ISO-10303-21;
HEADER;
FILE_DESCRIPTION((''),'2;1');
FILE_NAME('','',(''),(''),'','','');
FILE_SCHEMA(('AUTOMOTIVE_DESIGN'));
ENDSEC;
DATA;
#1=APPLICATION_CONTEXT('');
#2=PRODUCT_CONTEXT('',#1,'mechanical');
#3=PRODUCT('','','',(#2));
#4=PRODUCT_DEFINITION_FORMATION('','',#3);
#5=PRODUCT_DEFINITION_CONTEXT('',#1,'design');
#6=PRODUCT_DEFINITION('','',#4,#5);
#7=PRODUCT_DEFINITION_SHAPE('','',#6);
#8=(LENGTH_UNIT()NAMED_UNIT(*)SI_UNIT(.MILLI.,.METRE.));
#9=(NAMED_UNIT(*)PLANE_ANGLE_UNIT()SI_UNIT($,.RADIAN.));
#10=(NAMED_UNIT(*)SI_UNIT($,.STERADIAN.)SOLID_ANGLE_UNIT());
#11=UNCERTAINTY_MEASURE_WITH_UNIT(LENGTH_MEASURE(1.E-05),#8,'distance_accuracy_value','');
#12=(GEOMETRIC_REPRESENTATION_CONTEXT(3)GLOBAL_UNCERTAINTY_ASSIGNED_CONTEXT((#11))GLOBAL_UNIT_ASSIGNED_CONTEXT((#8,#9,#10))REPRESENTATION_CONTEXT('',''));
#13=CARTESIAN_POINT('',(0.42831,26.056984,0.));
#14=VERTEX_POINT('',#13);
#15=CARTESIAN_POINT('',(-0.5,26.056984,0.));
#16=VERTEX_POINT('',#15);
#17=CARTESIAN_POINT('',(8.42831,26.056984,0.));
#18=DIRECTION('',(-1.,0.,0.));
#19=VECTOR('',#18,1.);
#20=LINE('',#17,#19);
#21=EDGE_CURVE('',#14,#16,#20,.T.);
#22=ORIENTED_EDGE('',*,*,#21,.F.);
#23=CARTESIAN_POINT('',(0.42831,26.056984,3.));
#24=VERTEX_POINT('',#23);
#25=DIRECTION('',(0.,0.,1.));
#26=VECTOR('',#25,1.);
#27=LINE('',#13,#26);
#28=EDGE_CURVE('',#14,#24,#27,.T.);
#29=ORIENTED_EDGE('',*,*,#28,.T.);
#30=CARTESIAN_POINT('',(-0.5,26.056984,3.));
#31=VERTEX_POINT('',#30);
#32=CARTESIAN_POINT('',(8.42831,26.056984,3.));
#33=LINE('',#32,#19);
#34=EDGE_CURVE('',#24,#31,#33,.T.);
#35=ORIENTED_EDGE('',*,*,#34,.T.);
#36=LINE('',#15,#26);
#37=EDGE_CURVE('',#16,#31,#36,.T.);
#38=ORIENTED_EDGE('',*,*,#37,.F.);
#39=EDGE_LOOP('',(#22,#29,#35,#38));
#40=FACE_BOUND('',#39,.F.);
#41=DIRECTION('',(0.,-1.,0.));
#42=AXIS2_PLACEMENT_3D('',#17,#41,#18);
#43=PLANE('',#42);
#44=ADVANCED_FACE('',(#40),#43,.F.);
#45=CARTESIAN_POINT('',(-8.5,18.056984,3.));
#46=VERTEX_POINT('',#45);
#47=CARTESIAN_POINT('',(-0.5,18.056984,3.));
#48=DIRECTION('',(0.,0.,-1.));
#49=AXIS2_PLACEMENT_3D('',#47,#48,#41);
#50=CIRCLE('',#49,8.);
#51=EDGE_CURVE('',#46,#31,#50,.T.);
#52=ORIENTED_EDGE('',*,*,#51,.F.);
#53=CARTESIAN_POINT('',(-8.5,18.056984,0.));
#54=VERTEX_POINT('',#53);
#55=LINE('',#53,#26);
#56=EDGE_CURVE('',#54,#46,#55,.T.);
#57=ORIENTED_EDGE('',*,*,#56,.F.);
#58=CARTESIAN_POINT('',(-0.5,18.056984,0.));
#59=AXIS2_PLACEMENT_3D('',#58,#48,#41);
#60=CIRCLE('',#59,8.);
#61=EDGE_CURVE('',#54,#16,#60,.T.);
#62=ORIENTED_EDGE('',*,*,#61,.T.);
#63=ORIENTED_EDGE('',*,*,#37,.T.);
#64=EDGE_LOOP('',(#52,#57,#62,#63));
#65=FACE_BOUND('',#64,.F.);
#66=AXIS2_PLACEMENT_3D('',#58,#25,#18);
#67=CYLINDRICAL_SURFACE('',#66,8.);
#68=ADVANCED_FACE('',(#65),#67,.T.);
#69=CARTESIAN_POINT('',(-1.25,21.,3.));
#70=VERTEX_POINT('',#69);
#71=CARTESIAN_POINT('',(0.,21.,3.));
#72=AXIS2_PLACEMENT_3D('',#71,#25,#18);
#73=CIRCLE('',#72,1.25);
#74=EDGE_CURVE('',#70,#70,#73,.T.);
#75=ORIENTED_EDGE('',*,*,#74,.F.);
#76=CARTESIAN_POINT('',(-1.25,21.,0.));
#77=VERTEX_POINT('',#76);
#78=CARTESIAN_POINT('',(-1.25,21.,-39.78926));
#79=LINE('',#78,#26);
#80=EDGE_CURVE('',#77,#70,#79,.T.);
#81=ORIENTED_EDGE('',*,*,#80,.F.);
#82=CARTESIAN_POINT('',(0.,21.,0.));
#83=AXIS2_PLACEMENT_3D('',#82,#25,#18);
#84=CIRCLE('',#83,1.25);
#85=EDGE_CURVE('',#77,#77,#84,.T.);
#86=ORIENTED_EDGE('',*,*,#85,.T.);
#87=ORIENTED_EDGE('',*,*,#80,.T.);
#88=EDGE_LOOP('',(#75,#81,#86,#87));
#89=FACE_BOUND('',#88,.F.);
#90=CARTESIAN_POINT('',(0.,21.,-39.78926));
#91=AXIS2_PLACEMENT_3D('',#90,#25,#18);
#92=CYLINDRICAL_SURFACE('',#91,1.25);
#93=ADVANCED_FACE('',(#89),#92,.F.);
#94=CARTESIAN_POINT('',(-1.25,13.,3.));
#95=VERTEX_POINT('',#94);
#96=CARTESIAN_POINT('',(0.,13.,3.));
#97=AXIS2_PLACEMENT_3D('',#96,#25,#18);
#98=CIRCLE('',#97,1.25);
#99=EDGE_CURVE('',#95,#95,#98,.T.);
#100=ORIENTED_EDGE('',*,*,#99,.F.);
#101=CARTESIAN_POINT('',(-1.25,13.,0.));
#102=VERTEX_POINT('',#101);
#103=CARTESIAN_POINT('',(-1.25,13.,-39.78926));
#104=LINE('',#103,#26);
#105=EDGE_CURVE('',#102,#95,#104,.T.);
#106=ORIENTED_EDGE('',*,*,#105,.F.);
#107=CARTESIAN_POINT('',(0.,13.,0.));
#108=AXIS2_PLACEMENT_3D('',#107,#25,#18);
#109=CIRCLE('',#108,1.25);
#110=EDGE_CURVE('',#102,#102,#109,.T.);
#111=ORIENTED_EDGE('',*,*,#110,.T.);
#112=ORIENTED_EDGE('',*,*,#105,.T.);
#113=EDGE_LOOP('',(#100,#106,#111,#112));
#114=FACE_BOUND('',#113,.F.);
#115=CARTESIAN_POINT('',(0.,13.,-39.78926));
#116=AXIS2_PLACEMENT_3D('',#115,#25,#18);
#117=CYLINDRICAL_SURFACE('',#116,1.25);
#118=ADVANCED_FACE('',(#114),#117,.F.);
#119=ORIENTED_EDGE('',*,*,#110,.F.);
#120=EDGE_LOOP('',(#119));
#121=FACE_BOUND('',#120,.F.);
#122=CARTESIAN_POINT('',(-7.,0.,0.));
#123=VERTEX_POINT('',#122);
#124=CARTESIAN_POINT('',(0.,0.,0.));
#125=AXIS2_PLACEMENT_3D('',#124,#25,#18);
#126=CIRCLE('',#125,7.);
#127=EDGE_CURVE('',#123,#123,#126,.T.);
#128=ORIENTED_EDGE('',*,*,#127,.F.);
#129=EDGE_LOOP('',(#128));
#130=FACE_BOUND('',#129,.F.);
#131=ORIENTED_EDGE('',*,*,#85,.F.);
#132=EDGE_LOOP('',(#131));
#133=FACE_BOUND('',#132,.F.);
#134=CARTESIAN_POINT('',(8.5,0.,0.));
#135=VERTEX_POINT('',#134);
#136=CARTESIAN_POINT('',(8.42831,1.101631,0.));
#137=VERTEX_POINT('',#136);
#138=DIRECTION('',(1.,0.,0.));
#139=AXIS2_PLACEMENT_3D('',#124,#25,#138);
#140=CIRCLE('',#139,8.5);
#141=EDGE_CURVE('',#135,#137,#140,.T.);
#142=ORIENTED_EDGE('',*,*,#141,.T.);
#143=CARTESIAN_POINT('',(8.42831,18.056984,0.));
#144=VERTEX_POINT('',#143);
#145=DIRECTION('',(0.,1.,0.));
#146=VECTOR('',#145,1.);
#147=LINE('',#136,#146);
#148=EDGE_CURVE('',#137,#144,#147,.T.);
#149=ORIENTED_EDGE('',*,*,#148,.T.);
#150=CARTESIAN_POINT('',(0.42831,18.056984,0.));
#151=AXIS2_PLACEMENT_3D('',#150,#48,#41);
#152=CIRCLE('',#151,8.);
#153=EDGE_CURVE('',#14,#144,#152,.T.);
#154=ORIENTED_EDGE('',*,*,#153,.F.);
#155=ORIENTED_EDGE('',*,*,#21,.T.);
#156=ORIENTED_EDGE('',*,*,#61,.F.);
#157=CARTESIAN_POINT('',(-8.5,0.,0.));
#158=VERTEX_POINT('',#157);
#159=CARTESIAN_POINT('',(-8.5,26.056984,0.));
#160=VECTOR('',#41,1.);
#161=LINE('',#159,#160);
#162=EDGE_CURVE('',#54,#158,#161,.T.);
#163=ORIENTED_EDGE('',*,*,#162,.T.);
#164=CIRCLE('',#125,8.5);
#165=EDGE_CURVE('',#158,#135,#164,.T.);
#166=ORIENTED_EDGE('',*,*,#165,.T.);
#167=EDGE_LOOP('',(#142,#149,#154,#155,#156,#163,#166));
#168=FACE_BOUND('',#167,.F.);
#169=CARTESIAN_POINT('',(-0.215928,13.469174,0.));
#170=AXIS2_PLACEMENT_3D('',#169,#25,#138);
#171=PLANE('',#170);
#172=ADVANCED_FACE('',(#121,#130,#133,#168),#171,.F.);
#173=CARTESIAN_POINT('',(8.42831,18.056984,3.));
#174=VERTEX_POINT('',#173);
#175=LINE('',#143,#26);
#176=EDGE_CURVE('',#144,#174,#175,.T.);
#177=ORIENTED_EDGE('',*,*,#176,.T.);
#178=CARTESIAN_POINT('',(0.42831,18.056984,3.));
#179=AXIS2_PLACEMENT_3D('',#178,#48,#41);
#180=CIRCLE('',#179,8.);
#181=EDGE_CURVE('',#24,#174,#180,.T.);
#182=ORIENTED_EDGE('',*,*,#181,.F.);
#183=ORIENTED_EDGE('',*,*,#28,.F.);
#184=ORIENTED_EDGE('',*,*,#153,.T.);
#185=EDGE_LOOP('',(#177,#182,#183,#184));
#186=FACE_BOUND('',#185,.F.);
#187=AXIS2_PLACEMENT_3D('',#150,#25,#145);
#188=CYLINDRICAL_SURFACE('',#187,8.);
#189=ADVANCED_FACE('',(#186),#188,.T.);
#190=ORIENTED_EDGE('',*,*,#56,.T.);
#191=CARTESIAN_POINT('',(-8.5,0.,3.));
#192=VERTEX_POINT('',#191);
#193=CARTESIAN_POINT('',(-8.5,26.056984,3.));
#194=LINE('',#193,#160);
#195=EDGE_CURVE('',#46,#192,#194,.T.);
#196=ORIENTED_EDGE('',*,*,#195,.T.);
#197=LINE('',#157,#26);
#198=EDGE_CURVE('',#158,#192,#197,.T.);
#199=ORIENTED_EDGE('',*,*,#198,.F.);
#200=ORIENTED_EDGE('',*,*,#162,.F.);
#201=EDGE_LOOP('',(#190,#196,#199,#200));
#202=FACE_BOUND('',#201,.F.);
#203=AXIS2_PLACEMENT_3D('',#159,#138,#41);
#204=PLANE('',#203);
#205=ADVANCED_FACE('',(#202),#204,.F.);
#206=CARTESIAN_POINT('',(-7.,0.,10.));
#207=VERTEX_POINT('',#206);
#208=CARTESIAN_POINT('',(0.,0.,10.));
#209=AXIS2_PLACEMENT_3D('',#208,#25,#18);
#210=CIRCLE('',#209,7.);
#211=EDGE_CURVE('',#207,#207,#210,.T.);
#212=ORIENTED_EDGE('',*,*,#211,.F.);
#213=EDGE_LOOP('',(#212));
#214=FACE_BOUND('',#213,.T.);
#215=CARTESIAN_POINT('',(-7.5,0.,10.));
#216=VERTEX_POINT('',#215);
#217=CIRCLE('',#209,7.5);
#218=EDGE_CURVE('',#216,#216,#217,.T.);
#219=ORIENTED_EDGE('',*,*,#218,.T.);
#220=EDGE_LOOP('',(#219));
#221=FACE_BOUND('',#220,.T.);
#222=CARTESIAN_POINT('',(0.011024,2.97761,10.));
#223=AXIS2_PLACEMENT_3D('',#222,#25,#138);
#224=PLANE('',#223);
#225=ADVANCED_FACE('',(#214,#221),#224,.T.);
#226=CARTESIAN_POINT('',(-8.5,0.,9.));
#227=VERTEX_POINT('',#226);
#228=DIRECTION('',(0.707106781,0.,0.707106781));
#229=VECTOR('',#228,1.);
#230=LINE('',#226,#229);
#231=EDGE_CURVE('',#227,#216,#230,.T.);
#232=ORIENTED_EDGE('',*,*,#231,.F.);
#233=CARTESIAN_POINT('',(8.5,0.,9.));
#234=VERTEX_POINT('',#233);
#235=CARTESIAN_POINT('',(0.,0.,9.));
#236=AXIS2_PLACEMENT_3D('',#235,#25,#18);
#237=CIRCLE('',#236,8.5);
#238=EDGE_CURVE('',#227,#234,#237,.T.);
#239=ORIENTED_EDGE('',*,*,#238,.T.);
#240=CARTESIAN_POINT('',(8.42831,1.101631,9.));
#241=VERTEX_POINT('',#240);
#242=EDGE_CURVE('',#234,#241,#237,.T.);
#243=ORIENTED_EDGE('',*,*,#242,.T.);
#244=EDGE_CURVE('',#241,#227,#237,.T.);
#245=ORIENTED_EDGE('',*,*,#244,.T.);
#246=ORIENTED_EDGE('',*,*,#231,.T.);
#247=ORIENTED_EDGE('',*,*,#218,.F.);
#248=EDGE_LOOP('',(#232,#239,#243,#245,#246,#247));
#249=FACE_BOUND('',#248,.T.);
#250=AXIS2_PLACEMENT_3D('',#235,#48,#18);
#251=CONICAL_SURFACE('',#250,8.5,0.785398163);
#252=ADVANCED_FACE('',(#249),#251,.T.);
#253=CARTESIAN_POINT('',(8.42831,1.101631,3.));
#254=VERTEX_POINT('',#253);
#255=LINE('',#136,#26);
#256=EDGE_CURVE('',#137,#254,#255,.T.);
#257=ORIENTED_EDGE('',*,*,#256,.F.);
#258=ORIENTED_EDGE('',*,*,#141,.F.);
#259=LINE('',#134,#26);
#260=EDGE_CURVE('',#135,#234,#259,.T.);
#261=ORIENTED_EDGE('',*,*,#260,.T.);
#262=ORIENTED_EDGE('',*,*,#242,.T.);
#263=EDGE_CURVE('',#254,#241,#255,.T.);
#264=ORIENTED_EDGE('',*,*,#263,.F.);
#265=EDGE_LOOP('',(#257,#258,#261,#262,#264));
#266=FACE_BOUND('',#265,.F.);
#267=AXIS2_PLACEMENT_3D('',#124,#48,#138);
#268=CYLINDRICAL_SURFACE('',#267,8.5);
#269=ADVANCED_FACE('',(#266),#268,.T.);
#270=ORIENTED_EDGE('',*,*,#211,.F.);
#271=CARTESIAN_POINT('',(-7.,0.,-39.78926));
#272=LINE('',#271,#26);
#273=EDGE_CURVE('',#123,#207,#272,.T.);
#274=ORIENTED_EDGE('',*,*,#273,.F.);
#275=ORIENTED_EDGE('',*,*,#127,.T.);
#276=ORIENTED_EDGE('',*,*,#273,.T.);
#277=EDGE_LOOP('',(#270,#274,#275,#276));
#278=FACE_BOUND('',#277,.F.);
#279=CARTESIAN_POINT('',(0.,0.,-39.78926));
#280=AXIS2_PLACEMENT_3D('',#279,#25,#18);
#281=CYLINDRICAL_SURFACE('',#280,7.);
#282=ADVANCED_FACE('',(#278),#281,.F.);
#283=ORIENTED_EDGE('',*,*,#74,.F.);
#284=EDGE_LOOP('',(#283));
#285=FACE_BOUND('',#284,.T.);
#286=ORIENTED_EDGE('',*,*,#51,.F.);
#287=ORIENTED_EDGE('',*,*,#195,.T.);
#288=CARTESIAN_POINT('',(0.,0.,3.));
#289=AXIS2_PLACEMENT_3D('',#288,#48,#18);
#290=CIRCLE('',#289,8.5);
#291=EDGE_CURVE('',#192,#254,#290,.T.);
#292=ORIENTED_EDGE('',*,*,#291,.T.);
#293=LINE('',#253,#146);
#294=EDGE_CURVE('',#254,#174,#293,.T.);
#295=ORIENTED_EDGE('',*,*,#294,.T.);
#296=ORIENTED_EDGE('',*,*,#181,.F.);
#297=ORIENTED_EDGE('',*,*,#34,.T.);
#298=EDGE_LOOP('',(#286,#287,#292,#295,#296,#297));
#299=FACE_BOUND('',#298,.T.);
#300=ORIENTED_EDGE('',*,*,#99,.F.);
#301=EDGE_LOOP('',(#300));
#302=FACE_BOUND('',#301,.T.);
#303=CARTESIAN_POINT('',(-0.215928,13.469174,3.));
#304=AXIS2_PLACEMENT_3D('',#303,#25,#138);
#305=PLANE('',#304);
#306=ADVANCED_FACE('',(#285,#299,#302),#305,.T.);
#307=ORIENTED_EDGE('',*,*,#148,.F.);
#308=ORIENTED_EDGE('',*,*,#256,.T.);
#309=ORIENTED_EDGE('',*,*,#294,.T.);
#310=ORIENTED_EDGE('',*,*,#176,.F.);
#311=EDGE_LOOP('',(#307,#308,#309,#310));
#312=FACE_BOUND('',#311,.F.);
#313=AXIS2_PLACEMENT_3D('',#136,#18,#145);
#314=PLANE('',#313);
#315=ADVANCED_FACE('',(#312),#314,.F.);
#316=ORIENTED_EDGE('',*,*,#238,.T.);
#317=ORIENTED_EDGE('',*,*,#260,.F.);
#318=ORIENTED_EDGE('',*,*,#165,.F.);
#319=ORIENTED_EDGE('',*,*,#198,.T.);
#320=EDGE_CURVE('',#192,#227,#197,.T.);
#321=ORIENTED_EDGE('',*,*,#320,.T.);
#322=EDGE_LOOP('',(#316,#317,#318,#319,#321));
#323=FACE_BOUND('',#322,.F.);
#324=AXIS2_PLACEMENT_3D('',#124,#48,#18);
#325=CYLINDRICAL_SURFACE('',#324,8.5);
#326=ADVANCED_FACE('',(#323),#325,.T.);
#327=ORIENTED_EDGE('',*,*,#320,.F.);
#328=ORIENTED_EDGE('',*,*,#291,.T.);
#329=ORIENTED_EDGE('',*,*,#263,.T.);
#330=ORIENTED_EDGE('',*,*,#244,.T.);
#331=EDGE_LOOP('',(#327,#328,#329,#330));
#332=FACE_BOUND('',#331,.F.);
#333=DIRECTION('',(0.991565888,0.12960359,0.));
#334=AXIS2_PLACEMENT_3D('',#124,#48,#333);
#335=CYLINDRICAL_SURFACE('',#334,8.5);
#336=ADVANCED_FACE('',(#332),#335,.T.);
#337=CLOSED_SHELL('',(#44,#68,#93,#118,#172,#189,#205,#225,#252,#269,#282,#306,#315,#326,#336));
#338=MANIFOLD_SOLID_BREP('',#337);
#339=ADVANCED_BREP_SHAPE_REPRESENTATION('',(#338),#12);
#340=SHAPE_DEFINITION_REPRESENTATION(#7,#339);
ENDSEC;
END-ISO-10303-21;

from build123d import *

# Parameters (mm, degrees)
F1_DEPTH = 10
F2_DEPTH = 3
F3_R     = 8
F4_D     = 14
F6_D     = 2.5


# Not quite as in the source:
# - a fillet or chamfer that OpenCascade refuses, or shapes differently, is made with other operations: its cross-section is extruded or revolved along the edge and cut away or added


with BuildPart() as f1:
    # F0 (on Top) → F1 (new body)
    with BuildSketch(Plane.XY):
        with BuildLine():
            ThreePointArc((8.4283100441, 1.101630519), (-0.5519803552, 8.482058576), (-8.5, 0))
            Line((-8.5, 0), (8.4283100441, 0))
            Line((8.4283100441, 0), (8.4283100441, 1.101630519))
        make_face()
        with BuildLine():
            Line((8.4283100441, 0), (-8.5, 0))
            ThreePointArc((-8.5, 0), (0, -8.5), (8.5, 0))
            ThreePointArc((8.5, 0), (8.482058576, 0.5519803552), (8.4283100441, 1.101630519))
            Line((8.4283100441, 1.101630519), (8.4283100441, 0))
        make_face()
    extrude(amount=F1_DEPTH)

    # F0 (on Top) → F2 (join)
    with BuildSketch(Plane.XY):
        with BuildLine():
            Line((-8.5, 26.0569844395), (-8.5, 0))
            ThreePointArc((-8.5, 0), (-0.5519803552, 8.482058576), (8.4283100441, 1.101630519))
            Line((8.4283100441, 1.101630519), (8.4283100441, 26.0569844395))
            Line((8.4283100441, 26.0569844395), (-8.5, 26.0569844395))
        make_face()
    extrude(amount=F2_DEPTH)

    # F3
    f3_edges = [f1.edges().sort_by_distance(p)[0] for p in [
        (-8.5, 26.056984, 1.5),
        (8.42831, 26.056984, 1.5),
    ]]
    fillet(f3_edges, radius=F3_R)

    # F4 (through all)
    with Locations(Plane(origin=(0, 0, 0), x_dir=(1, 0, 0), z_dir=(0, 0, -1))):
        with Locations((0, 0)):
            Hole(F4_D / 2)

    # F5: chamfer of 1 on 1 edges, made by hand

    # F5_s1 → F5_t2 (revolve, cut)
    with BuildSketch(Plane.XZ):
        Polygon((-8.5, 9), (-7.5, 10), (-8.5, 10), align=None)
    revolve(axis=Axis((0, 0, 10), (0, 0, 1)), mode=Mode.SUBTRACT)

    # F6 (through all)
    with Locations(Plane(origin=(0, 0, 0), x_dir=(1, 0, 0), z_dir=(0, 0, -1))):
        with Locations((0, -21), (0, -13)):
            Hole(F6_D / 2)


solid = f1.part
